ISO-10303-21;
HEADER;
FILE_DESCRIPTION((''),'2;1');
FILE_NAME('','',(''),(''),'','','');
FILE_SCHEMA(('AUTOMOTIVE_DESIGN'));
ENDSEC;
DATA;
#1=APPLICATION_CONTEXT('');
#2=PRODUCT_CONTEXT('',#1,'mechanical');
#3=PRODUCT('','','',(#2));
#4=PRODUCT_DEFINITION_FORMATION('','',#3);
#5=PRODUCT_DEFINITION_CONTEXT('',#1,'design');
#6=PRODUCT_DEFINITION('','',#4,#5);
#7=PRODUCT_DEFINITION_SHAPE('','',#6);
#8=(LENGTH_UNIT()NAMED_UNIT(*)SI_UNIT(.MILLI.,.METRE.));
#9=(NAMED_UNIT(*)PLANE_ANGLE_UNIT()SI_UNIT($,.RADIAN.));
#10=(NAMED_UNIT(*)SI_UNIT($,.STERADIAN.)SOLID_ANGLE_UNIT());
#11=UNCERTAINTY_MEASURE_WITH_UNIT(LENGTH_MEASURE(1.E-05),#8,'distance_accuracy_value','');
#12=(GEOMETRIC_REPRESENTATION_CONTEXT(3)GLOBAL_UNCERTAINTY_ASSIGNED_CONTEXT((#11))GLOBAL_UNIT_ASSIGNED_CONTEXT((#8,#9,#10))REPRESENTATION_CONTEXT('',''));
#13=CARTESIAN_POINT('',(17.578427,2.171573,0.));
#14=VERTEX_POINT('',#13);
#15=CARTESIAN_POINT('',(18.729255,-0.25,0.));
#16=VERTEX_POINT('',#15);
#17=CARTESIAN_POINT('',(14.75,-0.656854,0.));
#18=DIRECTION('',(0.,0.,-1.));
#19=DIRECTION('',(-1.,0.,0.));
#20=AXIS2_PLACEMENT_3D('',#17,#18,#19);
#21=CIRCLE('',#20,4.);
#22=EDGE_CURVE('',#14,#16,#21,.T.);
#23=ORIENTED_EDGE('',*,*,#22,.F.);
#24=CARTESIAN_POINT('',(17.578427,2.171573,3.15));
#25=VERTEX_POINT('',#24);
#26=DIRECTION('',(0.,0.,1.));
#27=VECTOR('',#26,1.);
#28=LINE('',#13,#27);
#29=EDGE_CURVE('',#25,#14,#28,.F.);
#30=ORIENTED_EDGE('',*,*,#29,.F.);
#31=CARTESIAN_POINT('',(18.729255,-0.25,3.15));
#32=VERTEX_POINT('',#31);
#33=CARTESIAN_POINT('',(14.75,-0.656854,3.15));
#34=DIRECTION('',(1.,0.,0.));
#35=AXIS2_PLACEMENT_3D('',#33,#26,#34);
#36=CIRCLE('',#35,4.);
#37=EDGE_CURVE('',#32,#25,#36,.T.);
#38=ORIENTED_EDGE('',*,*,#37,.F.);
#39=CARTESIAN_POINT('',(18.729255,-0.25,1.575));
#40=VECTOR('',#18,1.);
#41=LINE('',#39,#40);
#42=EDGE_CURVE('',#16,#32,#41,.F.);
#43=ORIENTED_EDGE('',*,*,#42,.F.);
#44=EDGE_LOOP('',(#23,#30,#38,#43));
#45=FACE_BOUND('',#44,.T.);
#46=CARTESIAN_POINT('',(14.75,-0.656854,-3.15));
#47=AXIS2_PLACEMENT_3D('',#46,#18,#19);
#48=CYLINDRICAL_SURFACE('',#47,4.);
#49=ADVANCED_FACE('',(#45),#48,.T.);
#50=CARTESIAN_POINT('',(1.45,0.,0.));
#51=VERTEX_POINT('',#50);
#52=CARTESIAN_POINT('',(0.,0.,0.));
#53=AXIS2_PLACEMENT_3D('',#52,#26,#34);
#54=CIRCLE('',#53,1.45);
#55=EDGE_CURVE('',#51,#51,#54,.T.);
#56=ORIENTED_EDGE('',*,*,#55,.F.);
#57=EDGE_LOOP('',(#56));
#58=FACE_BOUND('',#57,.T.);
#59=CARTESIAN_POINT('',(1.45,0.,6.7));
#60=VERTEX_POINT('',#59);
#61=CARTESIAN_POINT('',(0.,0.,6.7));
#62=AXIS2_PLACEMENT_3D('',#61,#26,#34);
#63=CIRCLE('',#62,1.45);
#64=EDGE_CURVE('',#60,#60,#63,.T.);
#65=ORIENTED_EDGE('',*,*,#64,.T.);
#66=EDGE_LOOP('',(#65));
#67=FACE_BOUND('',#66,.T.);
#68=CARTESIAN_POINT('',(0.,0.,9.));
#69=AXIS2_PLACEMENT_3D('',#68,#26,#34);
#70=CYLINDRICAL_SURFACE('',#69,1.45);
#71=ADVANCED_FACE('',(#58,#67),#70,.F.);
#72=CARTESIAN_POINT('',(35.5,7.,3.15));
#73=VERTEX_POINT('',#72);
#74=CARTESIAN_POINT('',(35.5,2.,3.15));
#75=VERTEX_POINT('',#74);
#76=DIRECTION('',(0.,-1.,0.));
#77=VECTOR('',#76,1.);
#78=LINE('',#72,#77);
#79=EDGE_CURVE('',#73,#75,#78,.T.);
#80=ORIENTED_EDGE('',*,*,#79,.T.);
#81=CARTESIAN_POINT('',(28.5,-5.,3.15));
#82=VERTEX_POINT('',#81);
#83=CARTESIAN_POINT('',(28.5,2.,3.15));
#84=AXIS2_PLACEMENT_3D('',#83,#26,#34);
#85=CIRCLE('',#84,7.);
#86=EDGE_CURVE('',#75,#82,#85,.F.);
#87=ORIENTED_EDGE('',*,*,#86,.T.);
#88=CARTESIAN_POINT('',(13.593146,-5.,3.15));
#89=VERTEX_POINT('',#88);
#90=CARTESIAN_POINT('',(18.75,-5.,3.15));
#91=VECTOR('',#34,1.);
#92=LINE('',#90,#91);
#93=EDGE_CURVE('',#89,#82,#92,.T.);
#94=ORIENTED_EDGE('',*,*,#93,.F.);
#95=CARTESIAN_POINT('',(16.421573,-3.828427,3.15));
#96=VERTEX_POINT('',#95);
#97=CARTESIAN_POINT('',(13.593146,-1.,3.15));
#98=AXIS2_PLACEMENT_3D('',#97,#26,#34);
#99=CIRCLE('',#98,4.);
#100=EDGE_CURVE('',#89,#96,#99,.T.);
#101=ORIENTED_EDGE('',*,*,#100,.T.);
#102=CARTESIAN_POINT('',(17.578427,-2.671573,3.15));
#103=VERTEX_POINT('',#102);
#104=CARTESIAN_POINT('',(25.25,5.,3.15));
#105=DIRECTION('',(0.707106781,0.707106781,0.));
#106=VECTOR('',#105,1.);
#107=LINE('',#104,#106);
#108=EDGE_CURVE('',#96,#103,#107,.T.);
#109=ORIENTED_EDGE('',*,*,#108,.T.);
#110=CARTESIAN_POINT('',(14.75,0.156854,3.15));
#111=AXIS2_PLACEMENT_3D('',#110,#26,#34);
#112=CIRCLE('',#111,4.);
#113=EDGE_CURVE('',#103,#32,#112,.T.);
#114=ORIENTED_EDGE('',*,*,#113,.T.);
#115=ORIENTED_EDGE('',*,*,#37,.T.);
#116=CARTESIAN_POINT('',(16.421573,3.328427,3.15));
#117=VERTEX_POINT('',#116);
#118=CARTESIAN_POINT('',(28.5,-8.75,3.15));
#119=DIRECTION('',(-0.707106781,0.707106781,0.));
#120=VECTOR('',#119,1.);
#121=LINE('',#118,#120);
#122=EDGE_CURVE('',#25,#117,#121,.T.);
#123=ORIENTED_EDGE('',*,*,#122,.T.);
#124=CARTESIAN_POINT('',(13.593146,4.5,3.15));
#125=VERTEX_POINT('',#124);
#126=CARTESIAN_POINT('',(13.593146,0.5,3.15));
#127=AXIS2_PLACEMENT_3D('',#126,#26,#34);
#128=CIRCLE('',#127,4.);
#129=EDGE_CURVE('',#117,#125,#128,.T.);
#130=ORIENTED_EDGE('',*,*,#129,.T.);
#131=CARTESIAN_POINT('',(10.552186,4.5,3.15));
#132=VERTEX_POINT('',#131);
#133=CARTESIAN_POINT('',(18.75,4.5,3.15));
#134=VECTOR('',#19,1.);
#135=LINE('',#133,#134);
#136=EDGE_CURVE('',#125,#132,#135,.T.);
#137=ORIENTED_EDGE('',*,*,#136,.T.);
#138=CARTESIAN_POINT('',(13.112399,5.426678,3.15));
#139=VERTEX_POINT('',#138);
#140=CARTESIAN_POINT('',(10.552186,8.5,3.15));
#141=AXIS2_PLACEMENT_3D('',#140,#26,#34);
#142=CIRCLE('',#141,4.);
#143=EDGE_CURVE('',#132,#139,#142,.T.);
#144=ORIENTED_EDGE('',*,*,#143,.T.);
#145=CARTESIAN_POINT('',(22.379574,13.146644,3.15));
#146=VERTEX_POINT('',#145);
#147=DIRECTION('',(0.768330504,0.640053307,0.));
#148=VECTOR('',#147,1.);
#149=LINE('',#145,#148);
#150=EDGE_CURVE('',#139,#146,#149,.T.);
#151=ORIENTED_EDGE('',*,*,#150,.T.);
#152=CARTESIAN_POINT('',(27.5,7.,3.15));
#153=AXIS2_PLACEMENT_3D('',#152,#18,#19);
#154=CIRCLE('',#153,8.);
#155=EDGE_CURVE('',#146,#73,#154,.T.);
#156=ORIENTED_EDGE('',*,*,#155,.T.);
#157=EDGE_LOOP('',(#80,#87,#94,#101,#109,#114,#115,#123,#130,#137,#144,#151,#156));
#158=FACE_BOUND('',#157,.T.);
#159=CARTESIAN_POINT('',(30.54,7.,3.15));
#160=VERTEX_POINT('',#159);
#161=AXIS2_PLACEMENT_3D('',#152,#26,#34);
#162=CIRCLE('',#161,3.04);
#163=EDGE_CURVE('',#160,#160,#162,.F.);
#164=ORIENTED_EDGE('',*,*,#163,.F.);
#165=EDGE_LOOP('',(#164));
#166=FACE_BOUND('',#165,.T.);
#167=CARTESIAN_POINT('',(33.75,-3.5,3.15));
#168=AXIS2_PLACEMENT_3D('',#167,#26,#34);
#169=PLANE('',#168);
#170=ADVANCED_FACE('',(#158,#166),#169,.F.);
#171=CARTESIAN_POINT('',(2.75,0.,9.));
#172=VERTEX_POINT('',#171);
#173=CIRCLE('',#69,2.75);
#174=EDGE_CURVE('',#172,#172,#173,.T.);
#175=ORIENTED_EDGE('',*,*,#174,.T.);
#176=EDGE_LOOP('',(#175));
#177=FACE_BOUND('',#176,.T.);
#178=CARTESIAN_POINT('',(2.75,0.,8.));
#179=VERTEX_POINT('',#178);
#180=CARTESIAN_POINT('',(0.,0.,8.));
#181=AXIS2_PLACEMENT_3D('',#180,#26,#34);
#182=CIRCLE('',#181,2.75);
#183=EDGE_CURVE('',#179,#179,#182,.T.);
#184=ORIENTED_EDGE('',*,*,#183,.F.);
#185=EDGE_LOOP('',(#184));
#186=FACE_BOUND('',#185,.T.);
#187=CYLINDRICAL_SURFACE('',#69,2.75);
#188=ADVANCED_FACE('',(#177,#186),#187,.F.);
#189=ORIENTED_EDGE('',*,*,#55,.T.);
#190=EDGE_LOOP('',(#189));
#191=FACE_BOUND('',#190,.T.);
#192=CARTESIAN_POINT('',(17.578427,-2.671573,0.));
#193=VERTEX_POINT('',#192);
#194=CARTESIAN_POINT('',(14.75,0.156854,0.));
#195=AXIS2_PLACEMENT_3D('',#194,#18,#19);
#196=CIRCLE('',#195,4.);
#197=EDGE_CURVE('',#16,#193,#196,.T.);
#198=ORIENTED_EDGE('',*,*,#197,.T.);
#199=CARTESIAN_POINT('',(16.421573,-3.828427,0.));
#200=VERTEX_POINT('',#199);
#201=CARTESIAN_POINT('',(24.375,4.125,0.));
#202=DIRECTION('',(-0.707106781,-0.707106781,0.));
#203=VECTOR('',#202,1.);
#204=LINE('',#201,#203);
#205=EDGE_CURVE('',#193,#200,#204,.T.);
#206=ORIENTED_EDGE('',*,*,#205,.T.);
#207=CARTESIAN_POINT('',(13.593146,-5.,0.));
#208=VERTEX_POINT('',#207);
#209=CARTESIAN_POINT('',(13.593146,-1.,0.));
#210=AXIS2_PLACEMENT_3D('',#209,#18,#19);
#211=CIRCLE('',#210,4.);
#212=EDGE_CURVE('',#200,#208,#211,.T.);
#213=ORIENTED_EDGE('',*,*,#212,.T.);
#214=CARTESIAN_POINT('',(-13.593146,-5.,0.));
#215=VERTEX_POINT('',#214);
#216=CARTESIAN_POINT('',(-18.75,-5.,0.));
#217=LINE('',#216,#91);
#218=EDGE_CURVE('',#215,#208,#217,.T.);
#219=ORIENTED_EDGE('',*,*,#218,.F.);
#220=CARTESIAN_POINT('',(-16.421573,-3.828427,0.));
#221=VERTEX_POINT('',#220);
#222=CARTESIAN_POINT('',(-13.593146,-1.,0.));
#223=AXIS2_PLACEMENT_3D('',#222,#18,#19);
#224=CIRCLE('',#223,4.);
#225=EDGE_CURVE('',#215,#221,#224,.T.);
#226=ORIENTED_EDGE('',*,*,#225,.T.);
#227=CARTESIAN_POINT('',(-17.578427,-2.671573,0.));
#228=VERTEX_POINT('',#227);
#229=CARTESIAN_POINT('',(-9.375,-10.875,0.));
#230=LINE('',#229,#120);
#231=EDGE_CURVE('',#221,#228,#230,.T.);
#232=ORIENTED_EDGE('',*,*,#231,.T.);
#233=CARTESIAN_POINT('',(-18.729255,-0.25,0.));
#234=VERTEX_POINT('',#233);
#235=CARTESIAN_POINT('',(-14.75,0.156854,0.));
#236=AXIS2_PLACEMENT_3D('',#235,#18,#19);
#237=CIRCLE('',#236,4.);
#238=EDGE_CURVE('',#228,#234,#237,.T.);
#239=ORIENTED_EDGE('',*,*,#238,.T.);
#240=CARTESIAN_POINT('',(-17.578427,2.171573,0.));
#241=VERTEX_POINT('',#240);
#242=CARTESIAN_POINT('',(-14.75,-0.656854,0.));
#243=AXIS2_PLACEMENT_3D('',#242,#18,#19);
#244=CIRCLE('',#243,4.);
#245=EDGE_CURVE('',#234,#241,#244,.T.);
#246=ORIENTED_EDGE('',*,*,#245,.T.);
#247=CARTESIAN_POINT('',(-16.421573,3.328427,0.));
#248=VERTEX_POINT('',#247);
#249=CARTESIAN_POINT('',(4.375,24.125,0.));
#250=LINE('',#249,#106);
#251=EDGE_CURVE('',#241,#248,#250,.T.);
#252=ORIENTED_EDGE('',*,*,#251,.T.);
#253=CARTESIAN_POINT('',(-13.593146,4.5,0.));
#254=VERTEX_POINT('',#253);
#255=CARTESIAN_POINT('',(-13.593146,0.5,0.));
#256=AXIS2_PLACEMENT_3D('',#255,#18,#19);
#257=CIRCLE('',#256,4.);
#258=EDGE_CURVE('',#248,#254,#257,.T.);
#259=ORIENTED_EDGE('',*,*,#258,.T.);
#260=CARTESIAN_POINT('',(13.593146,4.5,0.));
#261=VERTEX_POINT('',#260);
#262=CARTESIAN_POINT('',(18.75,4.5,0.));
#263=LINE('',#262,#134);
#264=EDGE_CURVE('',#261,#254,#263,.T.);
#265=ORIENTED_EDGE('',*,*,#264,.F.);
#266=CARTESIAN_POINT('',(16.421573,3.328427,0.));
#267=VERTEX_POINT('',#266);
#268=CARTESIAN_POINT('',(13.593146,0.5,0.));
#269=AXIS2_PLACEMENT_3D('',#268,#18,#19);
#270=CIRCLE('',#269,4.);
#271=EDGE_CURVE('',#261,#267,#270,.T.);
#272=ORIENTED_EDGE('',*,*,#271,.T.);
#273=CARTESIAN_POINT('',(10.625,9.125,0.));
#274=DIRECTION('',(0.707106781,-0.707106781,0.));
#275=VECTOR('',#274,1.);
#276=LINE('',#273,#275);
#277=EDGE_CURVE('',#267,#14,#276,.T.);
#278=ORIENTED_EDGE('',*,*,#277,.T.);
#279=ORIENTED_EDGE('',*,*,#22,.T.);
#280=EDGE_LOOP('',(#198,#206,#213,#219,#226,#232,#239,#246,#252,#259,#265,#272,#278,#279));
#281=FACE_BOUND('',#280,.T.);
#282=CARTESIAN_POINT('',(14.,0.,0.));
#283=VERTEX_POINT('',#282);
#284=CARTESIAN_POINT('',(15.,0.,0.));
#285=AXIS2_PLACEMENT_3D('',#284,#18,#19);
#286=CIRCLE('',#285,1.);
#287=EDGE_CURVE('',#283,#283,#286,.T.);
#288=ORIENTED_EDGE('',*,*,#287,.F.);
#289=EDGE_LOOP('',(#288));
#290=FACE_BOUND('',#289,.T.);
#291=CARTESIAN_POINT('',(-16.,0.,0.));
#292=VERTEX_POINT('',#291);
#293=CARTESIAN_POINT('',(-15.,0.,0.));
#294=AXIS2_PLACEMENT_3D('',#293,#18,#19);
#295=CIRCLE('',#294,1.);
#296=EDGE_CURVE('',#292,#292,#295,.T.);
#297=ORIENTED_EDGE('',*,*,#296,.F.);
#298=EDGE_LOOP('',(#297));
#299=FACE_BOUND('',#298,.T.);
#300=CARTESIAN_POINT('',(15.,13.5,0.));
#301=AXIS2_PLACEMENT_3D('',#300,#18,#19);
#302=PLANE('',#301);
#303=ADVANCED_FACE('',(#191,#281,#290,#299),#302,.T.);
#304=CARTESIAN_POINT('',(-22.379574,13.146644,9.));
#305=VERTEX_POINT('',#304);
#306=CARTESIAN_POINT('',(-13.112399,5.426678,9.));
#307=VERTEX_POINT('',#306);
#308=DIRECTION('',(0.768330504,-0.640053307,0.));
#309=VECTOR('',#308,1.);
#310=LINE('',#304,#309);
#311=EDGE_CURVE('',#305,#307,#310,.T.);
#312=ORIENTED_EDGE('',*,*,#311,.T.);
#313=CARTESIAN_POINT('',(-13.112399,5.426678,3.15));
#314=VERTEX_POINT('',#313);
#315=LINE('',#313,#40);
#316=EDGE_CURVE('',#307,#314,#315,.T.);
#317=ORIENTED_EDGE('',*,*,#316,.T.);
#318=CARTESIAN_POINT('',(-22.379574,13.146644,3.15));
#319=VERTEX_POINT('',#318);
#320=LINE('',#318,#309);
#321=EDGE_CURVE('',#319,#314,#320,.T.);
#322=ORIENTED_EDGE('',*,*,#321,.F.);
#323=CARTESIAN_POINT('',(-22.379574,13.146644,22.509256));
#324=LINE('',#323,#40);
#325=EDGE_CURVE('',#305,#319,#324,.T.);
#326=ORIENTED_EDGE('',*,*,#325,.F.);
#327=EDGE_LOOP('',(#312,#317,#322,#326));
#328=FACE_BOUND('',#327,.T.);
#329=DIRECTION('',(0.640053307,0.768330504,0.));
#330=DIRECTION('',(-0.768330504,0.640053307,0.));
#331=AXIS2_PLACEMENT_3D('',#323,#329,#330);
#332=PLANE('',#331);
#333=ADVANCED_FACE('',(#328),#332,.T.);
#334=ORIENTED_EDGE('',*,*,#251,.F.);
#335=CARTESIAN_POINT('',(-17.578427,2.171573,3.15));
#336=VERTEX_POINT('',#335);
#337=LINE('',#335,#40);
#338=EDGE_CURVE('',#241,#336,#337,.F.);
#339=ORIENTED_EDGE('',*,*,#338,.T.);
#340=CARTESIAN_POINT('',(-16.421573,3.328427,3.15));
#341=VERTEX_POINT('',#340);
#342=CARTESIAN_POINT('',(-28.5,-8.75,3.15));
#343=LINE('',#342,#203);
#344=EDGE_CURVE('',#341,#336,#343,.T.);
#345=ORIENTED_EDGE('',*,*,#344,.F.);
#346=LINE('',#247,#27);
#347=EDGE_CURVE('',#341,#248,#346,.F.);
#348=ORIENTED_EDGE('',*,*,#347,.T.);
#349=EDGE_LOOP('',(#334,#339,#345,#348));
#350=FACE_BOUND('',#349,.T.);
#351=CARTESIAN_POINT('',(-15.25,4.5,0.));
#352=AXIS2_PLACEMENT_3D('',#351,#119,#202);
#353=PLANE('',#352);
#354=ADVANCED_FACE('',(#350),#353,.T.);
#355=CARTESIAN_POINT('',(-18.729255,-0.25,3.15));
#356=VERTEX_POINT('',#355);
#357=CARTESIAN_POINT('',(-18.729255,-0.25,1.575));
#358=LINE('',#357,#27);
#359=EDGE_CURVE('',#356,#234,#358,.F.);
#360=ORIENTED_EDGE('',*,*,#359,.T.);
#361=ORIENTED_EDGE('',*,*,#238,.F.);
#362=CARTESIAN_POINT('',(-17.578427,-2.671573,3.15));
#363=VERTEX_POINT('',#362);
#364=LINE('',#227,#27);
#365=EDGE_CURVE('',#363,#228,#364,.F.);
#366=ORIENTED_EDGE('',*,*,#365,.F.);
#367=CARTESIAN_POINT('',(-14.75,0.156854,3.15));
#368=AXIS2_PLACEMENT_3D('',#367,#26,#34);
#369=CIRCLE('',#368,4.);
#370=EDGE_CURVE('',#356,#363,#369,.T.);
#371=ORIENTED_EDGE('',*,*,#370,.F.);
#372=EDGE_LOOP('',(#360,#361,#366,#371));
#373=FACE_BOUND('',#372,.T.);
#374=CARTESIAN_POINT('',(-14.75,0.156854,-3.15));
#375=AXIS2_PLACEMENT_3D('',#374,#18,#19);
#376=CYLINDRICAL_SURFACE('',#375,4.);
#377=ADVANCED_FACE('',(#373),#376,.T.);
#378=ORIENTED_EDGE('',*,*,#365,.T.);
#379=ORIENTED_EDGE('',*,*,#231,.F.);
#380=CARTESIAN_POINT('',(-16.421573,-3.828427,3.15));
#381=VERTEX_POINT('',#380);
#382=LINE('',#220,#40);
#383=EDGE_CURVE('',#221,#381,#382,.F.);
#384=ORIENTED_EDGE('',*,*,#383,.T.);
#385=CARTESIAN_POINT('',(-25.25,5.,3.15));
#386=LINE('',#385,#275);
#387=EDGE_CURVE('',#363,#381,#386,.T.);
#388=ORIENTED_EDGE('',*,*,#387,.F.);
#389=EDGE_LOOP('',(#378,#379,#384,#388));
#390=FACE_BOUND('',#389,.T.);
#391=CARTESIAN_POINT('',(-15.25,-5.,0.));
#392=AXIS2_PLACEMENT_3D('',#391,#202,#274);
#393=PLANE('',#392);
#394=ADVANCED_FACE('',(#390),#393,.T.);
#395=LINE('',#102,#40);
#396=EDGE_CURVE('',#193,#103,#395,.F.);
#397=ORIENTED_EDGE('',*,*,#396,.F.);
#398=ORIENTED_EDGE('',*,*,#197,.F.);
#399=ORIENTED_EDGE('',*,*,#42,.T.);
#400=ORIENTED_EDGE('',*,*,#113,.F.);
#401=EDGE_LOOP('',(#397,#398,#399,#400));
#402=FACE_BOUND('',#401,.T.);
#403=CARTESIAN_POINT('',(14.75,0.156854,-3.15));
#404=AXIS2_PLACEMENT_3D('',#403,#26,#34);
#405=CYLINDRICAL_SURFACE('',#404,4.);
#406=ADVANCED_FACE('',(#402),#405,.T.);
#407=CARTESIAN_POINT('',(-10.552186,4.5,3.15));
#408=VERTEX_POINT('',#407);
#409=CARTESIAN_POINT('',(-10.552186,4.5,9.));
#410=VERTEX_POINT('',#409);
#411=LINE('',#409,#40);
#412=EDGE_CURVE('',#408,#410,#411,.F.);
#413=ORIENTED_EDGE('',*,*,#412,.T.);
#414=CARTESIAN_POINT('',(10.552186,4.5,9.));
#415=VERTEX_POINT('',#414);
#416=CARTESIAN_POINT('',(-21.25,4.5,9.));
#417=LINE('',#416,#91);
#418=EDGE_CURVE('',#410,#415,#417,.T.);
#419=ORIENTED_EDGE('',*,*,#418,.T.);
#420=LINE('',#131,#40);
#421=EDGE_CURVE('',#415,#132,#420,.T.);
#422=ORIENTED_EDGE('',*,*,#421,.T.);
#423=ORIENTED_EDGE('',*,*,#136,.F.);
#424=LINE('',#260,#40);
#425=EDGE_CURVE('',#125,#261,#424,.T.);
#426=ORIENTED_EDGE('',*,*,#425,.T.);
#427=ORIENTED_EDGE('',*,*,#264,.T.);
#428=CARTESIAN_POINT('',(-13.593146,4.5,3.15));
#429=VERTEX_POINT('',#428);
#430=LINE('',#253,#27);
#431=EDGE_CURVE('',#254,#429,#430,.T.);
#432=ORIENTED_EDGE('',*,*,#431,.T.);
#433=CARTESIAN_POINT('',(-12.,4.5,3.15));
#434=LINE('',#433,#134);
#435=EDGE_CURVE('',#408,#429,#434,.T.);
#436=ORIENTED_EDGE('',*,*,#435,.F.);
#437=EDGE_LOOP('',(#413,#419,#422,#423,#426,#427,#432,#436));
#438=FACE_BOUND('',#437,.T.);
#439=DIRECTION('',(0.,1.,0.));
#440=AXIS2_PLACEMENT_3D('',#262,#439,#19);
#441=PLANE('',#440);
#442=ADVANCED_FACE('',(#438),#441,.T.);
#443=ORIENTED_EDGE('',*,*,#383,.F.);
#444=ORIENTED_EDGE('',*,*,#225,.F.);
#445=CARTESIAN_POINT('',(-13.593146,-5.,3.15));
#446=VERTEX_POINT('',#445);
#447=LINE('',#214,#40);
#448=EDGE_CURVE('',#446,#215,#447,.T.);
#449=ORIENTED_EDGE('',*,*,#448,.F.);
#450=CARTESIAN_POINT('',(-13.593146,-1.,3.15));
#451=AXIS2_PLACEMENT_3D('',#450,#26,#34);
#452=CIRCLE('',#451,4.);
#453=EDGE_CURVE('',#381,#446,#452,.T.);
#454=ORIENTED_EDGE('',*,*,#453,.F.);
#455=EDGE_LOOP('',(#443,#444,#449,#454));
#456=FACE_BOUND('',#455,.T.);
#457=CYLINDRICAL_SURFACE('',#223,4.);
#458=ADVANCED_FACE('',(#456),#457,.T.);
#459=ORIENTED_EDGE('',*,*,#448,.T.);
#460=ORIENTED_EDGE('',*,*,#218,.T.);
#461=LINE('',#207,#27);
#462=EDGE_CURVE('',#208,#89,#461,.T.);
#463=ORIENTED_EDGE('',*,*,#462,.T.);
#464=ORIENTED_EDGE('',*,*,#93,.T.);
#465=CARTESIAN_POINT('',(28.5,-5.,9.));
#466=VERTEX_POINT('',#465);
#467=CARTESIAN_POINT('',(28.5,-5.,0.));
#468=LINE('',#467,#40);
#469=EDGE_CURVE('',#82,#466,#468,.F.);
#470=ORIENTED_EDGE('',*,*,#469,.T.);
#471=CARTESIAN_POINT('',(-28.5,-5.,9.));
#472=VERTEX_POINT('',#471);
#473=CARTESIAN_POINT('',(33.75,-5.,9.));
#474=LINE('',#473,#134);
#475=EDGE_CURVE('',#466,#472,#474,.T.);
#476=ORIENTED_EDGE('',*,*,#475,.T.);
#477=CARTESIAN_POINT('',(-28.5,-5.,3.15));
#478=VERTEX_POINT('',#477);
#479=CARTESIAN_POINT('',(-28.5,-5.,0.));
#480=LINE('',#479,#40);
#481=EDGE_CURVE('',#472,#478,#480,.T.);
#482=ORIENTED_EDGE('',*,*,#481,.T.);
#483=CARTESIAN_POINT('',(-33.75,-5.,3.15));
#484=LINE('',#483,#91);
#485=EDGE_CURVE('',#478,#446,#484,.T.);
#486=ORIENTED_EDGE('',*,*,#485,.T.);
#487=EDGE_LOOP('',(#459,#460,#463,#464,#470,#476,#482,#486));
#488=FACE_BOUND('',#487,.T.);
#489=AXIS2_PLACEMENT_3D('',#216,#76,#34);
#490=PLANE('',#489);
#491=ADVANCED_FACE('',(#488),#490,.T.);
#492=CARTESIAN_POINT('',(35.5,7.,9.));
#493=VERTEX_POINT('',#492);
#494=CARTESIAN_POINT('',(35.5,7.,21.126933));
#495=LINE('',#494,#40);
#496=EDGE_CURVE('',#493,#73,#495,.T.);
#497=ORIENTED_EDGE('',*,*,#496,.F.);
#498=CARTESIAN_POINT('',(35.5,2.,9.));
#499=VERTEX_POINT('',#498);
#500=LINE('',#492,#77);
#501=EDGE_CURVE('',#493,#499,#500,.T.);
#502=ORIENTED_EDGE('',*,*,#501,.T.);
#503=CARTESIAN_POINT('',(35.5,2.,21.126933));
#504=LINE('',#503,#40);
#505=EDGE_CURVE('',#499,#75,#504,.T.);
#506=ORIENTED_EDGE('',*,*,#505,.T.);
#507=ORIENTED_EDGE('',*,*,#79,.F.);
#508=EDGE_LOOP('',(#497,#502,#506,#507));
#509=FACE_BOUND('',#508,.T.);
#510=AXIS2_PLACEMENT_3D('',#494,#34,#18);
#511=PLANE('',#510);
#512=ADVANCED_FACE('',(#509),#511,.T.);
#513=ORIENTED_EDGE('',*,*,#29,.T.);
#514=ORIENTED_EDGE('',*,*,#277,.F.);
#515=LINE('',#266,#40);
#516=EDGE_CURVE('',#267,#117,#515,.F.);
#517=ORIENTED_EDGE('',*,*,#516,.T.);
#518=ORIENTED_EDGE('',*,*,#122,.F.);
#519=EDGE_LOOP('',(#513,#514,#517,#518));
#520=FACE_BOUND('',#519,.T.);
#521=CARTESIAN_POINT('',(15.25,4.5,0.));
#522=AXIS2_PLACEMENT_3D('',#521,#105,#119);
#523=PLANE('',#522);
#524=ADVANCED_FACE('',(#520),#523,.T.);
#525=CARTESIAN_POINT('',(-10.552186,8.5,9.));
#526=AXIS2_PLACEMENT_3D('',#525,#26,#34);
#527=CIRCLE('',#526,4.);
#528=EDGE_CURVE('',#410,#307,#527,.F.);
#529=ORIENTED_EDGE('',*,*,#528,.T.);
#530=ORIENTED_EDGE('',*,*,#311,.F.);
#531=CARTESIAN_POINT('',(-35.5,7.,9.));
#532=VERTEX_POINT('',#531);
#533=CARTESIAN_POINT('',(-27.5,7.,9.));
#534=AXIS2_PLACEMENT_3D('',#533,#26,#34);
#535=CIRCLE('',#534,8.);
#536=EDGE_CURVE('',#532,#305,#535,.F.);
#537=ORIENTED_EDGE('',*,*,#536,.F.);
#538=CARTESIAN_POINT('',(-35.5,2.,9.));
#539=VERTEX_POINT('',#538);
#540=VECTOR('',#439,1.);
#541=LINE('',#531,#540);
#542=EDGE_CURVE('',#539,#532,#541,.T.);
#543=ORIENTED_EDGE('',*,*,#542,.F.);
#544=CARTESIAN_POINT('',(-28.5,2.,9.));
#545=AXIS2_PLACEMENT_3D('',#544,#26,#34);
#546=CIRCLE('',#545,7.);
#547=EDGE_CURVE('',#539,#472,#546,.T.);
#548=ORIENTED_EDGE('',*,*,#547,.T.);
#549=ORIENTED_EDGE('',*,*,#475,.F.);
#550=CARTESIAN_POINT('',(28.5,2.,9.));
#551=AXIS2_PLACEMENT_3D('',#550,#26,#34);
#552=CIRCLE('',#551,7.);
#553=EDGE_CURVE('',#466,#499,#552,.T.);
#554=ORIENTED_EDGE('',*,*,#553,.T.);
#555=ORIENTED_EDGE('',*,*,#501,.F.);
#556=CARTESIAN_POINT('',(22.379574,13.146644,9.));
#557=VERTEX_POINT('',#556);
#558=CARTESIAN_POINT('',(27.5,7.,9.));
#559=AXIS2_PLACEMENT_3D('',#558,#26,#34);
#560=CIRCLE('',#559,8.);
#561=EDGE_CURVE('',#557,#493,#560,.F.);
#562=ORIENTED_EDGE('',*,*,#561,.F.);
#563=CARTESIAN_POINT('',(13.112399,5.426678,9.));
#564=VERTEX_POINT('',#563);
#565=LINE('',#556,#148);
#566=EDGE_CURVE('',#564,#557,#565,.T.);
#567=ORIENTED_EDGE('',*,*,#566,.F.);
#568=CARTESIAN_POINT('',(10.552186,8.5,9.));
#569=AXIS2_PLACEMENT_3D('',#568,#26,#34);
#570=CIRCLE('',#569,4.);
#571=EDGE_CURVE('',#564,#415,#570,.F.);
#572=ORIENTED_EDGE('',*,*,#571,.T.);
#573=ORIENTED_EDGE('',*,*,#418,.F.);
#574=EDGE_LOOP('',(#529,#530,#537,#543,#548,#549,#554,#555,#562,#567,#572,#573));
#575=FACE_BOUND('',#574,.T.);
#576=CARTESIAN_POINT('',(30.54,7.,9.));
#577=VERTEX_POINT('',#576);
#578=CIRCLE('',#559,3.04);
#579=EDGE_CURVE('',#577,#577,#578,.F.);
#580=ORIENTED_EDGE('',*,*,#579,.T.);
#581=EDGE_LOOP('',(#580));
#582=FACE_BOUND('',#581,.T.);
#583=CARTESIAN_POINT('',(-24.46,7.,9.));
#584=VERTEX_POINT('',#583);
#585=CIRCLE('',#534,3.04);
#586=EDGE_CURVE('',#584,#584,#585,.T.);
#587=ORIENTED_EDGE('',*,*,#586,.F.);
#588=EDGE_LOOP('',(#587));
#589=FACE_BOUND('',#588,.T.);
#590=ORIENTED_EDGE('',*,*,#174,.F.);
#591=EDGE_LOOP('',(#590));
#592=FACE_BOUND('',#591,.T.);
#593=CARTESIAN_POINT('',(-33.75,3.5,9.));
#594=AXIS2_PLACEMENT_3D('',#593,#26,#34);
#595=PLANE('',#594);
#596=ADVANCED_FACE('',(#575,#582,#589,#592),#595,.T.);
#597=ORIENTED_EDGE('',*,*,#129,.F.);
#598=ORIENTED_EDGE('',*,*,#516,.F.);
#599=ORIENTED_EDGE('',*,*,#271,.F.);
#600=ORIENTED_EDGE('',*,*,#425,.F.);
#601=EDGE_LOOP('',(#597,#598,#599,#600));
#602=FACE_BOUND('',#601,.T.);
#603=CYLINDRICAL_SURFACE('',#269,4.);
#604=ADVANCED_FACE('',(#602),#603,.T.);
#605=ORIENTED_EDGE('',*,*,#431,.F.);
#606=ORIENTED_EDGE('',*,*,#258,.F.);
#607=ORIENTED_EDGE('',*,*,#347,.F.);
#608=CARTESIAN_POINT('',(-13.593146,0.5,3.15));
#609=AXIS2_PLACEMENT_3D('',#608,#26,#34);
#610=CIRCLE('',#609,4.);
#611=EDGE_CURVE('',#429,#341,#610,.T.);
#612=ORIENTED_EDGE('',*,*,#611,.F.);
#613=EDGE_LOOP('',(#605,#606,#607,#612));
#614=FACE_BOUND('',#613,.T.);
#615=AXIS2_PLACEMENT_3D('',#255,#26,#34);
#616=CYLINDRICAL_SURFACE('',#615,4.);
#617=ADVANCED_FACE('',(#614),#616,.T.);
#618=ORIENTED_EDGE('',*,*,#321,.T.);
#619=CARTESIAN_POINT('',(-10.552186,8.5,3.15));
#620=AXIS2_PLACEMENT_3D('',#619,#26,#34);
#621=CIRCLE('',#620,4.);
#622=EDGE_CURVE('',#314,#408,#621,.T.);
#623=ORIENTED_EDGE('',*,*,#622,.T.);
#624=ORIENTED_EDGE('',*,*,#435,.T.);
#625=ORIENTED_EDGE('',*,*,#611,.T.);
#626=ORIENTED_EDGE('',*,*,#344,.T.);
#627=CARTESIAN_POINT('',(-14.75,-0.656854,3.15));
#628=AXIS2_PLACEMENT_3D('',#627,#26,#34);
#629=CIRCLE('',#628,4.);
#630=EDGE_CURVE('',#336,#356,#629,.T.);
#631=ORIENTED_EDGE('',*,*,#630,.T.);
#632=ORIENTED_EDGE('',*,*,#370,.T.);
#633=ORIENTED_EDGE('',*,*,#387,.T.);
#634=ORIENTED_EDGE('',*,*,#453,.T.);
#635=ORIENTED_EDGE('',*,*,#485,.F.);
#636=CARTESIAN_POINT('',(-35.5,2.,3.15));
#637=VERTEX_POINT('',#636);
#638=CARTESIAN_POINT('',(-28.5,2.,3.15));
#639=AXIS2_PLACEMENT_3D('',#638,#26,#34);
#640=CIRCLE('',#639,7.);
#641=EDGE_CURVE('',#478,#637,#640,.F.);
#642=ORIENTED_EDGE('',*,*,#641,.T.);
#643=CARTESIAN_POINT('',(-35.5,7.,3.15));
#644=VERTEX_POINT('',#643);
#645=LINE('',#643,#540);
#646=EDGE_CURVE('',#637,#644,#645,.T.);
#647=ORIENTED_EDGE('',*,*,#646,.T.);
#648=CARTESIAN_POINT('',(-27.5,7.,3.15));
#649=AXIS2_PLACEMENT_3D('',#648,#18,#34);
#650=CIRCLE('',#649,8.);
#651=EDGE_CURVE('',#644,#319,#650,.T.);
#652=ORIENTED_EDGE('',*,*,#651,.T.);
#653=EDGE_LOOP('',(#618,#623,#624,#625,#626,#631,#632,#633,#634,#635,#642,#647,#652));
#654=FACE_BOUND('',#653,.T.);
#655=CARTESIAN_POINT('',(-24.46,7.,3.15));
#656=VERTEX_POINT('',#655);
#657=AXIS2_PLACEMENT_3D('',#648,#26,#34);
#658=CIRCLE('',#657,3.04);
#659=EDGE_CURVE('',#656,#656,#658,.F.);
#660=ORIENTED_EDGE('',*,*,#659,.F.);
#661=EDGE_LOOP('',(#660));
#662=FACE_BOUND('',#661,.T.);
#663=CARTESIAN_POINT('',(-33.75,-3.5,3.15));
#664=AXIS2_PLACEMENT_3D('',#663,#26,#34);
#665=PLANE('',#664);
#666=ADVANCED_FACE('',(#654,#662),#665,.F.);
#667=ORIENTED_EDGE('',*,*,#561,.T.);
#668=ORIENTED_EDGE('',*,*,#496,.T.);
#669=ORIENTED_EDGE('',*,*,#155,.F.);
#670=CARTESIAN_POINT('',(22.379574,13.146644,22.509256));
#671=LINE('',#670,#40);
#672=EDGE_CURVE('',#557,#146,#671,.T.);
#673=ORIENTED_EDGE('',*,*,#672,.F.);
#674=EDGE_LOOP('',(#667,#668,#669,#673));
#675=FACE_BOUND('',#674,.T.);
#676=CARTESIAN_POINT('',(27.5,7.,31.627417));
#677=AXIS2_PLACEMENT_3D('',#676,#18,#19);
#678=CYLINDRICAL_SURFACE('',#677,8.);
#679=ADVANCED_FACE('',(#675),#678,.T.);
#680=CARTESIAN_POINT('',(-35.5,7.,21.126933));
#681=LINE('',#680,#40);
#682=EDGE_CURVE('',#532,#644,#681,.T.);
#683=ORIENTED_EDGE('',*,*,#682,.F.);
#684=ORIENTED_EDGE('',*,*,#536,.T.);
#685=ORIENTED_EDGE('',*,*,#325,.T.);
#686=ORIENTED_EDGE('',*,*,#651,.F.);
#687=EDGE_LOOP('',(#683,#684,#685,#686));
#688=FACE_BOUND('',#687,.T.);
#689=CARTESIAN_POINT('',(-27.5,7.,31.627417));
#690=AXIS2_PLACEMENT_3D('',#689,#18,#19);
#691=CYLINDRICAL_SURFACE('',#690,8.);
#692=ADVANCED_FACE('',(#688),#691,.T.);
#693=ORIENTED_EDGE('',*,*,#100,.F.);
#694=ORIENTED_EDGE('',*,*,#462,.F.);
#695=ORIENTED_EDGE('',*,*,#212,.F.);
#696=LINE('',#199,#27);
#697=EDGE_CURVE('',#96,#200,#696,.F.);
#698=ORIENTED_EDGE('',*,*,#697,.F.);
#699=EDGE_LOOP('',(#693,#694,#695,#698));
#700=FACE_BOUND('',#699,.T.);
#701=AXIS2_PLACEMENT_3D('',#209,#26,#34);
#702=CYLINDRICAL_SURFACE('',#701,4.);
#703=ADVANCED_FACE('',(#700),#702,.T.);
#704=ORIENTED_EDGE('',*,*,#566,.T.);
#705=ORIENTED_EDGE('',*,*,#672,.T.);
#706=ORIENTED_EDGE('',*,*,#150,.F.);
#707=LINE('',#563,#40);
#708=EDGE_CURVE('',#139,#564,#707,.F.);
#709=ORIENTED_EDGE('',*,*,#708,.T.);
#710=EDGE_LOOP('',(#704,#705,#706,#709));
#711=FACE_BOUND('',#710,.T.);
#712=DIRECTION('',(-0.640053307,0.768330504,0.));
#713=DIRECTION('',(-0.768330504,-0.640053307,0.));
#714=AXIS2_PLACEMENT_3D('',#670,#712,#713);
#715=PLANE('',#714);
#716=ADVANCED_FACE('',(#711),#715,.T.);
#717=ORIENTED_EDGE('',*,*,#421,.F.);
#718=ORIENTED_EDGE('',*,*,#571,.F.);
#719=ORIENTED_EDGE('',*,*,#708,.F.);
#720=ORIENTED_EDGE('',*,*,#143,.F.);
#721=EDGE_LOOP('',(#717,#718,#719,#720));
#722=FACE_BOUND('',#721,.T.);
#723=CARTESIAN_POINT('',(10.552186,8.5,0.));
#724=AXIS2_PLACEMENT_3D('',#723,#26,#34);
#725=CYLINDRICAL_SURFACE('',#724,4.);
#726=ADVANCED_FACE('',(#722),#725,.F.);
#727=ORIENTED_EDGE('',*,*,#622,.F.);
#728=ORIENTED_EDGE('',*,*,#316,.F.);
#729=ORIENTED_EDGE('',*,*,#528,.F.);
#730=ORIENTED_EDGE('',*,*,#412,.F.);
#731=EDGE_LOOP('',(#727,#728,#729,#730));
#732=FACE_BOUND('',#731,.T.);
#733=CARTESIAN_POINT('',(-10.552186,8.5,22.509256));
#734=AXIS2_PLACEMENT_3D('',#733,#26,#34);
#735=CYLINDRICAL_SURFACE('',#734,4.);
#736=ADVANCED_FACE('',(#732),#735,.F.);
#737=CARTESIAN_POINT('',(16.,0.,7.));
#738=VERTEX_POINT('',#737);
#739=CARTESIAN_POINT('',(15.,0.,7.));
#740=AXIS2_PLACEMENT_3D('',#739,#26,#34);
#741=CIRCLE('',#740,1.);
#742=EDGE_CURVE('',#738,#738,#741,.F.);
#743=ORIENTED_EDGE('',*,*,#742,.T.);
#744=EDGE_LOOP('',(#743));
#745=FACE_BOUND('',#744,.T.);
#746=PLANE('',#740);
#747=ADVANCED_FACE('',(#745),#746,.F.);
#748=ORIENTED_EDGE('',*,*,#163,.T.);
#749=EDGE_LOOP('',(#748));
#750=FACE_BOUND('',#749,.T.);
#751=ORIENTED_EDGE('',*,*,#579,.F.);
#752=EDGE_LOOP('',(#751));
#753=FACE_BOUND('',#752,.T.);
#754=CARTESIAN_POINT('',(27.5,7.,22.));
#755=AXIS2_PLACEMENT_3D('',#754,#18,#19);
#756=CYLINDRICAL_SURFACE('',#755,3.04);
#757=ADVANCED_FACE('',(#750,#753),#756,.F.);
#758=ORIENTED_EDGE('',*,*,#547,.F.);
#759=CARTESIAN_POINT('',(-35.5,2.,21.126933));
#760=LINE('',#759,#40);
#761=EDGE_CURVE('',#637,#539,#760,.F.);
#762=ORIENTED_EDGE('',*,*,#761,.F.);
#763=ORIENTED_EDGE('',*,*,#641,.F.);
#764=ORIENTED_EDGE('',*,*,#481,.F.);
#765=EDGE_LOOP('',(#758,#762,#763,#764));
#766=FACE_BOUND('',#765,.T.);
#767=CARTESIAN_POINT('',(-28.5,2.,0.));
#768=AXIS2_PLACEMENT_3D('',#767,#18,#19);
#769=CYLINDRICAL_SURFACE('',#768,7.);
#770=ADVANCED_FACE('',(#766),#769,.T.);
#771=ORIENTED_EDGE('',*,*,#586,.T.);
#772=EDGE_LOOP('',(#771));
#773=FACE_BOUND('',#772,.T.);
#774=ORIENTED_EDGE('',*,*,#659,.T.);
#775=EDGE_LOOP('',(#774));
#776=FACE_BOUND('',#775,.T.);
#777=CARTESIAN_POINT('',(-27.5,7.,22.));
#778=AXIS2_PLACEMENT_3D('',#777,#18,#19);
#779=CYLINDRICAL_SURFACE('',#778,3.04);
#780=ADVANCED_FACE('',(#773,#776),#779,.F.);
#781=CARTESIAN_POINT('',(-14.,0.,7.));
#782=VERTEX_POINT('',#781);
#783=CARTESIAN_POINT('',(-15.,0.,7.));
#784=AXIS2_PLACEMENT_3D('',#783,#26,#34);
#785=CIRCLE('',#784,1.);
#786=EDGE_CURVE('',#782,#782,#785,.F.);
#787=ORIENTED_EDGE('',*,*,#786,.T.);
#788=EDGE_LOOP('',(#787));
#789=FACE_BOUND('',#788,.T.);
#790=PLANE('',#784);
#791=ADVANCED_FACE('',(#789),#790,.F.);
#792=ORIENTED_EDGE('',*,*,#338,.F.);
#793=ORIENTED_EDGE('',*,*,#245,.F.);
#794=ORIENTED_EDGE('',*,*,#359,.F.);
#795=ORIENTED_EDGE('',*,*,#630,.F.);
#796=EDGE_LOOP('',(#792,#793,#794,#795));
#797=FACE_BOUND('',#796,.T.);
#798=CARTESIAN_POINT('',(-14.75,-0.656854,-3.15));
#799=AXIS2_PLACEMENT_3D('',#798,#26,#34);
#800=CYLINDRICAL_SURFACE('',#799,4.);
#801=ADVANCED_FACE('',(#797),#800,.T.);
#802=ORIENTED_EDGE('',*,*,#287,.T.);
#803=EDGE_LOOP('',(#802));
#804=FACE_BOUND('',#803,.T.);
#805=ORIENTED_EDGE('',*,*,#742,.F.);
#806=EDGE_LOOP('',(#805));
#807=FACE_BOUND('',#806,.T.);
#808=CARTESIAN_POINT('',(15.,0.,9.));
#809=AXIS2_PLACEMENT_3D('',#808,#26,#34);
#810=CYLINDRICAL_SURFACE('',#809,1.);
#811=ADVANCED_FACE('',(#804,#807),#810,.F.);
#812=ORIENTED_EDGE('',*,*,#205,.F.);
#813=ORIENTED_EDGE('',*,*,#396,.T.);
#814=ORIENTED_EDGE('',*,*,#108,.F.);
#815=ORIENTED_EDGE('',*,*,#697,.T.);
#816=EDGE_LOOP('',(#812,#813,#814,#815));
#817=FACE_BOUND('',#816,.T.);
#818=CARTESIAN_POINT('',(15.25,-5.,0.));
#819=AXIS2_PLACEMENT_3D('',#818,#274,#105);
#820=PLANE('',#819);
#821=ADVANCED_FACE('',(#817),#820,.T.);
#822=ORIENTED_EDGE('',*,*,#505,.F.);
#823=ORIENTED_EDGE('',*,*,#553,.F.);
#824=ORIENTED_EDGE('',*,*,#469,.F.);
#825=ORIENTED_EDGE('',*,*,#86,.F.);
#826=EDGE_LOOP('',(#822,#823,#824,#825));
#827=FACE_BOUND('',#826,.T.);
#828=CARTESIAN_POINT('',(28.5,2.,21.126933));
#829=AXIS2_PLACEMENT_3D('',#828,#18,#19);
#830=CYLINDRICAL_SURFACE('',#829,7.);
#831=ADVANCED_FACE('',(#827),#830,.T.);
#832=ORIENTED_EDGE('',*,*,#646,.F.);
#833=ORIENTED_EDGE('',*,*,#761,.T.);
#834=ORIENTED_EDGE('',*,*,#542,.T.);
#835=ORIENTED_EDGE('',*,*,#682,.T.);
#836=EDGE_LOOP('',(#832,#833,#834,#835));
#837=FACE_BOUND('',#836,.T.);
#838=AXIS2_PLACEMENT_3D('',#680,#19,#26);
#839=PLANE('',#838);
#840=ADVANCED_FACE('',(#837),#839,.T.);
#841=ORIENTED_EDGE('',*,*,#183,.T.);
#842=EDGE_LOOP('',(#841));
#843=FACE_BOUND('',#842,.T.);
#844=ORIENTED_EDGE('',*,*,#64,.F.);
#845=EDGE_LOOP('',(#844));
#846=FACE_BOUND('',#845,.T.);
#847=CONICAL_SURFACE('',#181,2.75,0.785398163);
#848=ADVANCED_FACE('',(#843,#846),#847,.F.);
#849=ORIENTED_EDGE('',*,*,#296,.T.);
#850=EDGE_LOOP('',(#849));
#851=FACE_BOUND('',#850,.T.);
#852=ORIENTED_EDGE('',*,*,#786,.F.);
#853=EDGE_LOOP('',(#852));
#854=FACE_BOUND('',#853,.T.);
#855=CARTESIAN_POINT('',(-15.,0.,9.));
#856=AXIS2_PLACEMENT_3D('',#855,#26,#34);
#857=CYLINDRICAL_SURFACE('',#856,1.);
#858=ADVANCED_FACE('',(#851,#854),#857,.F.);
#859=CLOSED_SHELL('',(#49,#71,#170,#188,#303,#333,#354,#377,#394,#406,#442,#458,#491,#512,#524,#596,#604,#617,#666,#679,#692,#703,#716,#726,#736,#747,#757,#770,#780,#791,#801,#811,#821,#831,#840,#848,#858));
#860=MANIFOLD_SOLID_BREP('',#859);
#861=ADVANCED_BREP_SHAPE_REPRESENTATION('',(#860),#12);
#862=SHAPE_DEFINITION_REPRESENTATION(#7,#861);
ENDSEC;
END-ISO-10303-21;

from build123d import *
from build123d.topology import SkipClean

# Parameters (mm, degrees)
BOSS_EXTRUDE1_DEPTH          = 9
BOSS_EXTRUDE1_DEPTH_BACK     = 9
SKETCH1_W                    = 67.5
SKETCH1_H                    = 7
SKETCH2_W                    = 15
SKETCH2_H                    = 6.3
CUT_EXTRUDE1_DEPTH           = 36.623903492
SKETCH3_W                    = 12.5
SKETCH3_H                    = 5.85
BOSS_EXTRUDE2_DEPTH          = 10
CUT_EXTRUDE2_DEPTH           = 22
CUT_EXTRUDE2_DEPTH_BACK      = 24.5
SKETCH4_R                    = 3.04
CUT_EXTRUDE3_DEPTH           = 5
SKETCH6_R                    = 6.2
CUT_EXTRUDE4_DEPTH           = 1
MIRROR2_COPY_1_SKETCH_R      = 6.2
MIRROR2_COPY_1_DEPTH         = 1
SKETCH7_W                    = 12.5
SKETCH7_H                    = 8.5
CUT_EXTRUDE5_DEPTH           = 1
MIRROR5_COPY_1_SKETCH_W      = 12.5
MIRROR5_COPY_1_SKETCH_H      = 8.5
MIRROR5_COPY_1_DEPTH         = 1
TAP_DRILL_FOR_M2_TAP1_D      = 1.6
CUT_EXTRUDE6_DEPTH           = 27
SKETCH12_W                   = 73.606041854
SKETCH12_H                   = 30.436261762
CUT_EXTRUDE7_DEPTH           = 22
F_2_0_2_DIAMETER_HOLE1_D     = 2
F_2_0_2_DIAMETER_HOLE1_DEPTH = 30.5
F_2_0_2_DIAMETER_HOLE2_D     = 2
F_2_0_2_DIAMETER_HOLE2_DEPTH = 16
F_2_0_2_DIAMETER_HOLE2_TIP   = 0.600860619
BOSS_EXTRU_1_START           = 1
ESQUISSE2_R                  = 3.04
BOSS_EXTRU_1_DEPTH           = 1
BOSS_EXTRU_3_START           = -5.85
ESQUISSE5_R                  = 0.8
BOSS_EXTRU_3_DEPTH           = 5.85
BOSS_EXTRU_4_START           = -9
ESQUISSE6_R                  = 0.8
BOSS_EXTRU_4_DEPTH           = 9
BOSS_EXTRUDE3_DEPTH          = 1.5
BOSS_EXTRUDE4_DEPTH          = 1
BOSS_EXTRUDE5_DEPTH          = 5.85
CHAMFER1_SIZE                = 3.5
BOSS_EXTRUDE6_START          = -2
SKETCH27_R                   = 1
BOSS_EXTRUDE6_DEPTH          = 2
SKETCH28_R                   = 8
SKETCH28_R_2                 = 3.04
BOSS_EXTRUDE7_DEPTH          = 5.85
SKETCH29_W                   = 1.75
SKETCH29_H                   = 12
BOSS_EXTRUDE8_DEPTH          = 5.85
BOSS_EXTRUDE9_DEPTH          = 5.85
FILLET1_R                    = 4
FILLET2_R                    = 7
FILLET4_R                    = 4


with BuildPart() as part:
    # Sketch1 → Boss-Extrude1 (new, two sides: drawn at the far end of the back side and taken through both)
    with BuildSketch(Plane.XY.offset(-BOSS_EXTRUDE1_DEPTH_BACK)):
        Rectangle(SKETCH1_W, SKETCH1_H)
    extrude(amount=BOSS_EXTRUDE1_DEPTH + BOSS_EXTRUDE1_DEPTH_BACK)

    # Sketch2 → Cut-Extrude1 (cut, through all)
    with BuildSketch(Plane(origin=(0, 3.5, 0), x_dir=(1, 0, 0), z_dir=(0, 1, 0))):
        with Locations((-26.25, 0)):
            Rectangle(SKETCH2_W, SKETCH2_H)
        with Locations((26.25, 0)):
            Rectangle(SKETCH2_W, SKETCH2_H)
    extrude(amount=-CUT_EXTRUDE1_DEPTH, mode=Mode.SUBTRACT)

    # Sketch3 → Boss-Extrude2 (add)
    with BuildSketch(Plane(origin=(0, 3.5, 0), x_dir=(1, 0, 0), z_dir=(0, 1, 0))):
        with Locations((-27.5, 6.075)):
            Rectangle(SKETCH3_W, SKETCH3_H)
        with Locations((-27.5, -6.075)):
            Rectangle(SKETCH3_W, SKETCH3_H)
        with Locations((27.5, -6.075)):
            Rectangle(SKETCH3_W, SKETCH3_H)
        with Locations((27.5, 6.075)):
            Rectangle(SKETCH3_W, SKETCH3_H)
    extrude(amount=BOSS_EXTRUDE2_DEPTH)

    # Sketch4 → Cut-Extrude2 (cut, two sides: drawn at the far end of the back side and taken through both)
    with BuildSketch(Plane.XY.offset(-CUT_EXTRUDE2_DEPTH_BACK)):
        with Locations((-27.5, 7)):
            Circle(SKETCH4_R)
        with Locations((27.5, 7)):
            Circle(SKETCH4_R)
    extrude(amount=CUT_EXTRUDE2_DEPTH + CUT_EXTRUDE2_DEPTH_BACK, mode=Mode.SUBTRACT)

    # Sketch5 → Cut-Extrude3 (cut)
    with BuildSketch(Plane.XY):
        Polygon((15, 3.5), (36.256888292, -2.195766051), (36.256888292, 13.5), (15, 13.5), align=None)
    extrude(amount=-CUT_EXTRUDE3_DEPTH, mode=Mode.SUBTRACT)

    # Sketch6 → Cut-Extrude4 (cut)
    with BuildSketch(Plane.XY.offset(9)):
        with Locations((27.5, 7)):
            Circle(SKETCH6_R)
    cut_extrude4 = extrude(amount=-CUT_EXTRUDE4_DEPTH, mode=Mode.SUBTRACT)

    # Mirror1: Cut-Extrude4 across plane
    add(cut_extrude4.mirror(Plane.XY), mode=Mode.SUBTRACT)

    # Mirror2: Cut-Extrude4 across plane
    add(cut_extrude4.mirror(Plane(origin=(0, 0, 0), x_dir=(0, 0, 1), z_dir=(1, 0, 0))), mode=Mode.SUBTRACT)

    # Mirror2 copy 1 sketch → Mirror2 copy 1 (cut)
    with BuildSketch(Plane(origin=(0, 0, -9), x_dir=(-1, 0, 0), z_dir=(0, 0, -1))):
        with Locations((27.5, 7)):
            Circle(MIRROR2_COPY_1_SKETCH_R)
    extrude(amount=-MIRROR2_COPY_1_DEPTH, mode=Mode.SUBTRACT)

    # Sketch7 → Cut-Extrude5 (cut)
    with BuildSketch(Plane.XY.offset(9)):
        with Locations((-27.5, 9.25)):
            Rectangle(SKETCH7_W, SKETCH7_H)
    cut_extrude5 = extrude(amount=-CUT_EXTRUDE5_DEPTH, mode=Mode.SUBTRACT)

    # Mirror3: Cut-Extrude5 across plane
    add(cut_extrude5.mirror(Plane(origin=(0, 0, 0), x_dir=(0, 0, 1), z_dir=(1, 0, 0))), mode=Mode.SUBTRACT)

    # Mirror5: Cut-Extrude5 across plane
    add(cut_extrude5.mirror(Plane.XY), mode=Mode.SUBTRACT)

    # Mirror5 copy 1 sketch → Mirror5 copy 1 (cut)
    with BuildSketch(Plane(origin=(0, 0, -9), x_dir=(-1, 0, 0), z_dir=(0, 0, -1))):
        with Locations((-27.5, 9.25)):
            Rectangle(MIRROR5_COPY_1_SKETCH_W, MIRROR5_COPY_1_SKETCH_H)
    extrude(amount=-MIRROR5_COPY_1_DEPTH, mode=Mode.SUBTRACT)

    # Tap Drill for M2 Tap1 (through all)
    with Locations(Plane.XY.offset(9)):
        with Locations((-25, 0), (0, 0), (25, 0)):
            Hole(TAP_DRILL_FOR_M2_TAP1_D / 2)

    # Sketch11 → Cut-Extrude6 (cut)
    with BuildSketch(Plane.XY.offset(9)):
        with BuildLine():
            Line((-33.75, 6.999999588), (-33.75, 21.221242017))
            Line((-33.75, 21.221242017), (-21.25, 21.221242017))
            Line((-21.25, 21.221242017), (-21.25, 6.999999588))
            ThreePointArc((-21.25, 6.999999588), (-27.5, 13.25), (-33.75, 6.999999588))
        make_face()
    cut_extrude6 = extrude(amount=-CUT_EXTRUDE6_DEPTH, mode=Mode.SUBTRACT)

    # Mirror6: Cut-Extrude6 across plane
    add(cut_extrude6.mirror(Plane(origin=(0, 0, 0), x_dir=(0, 0, 1), z_dir=(1, 0, 0))), mode=Mode.SUBTRACT)

    # Sketch12 → Cut-Extrude7 (cut)
    with BuildSketch(Plane.XY):
        Rectangle(SKETCH12_W, SKETCH12_H)
    extrude(amount=-CUT_EXTRUDE7_DEPTH, mode=Mode.SUBTRACT)

    # Ø2.0 (2) Diameter Hole1
    with Locations(Plane.XY.offset(9)):
        with Locations((-15, 0)):
            Hole(F_2_0_2_DIAMETER_HOLE1_D / 2, depth=F_2_0_2_DIAMETER_HOLE1_DEPTH)

    # Ø2.0 (2) Diameter Hole2
    with Locations(Plane.XY.offset(9)):
        with Locations((15, 0)):
            Hole(F_2_0_2_DIAMETER_HOLE2_D / 2, depth=F_2_0_2_DIAMETER_HOLE2_DEPTH)
            with Locations((0, 0, -(F_2_0_2_DIAMETER_HOLE2_DEPTH + F_2_0_2_DIAMETER_HOLE2_TIP / 2))):  # 118° drill point
                Cone(0, F_2_0_2_DIAMETER_HOLE2_D / 2, F_2_0_2_DIAMETER_HOLE2_TIP, mode=Mode.SUBTRACT)

    # Esquisse2 → Boss.-Extru.1 (add)
    # profile 1 of 2: a face of its own
    with SkipClean():  # the faces are left unmerged after this step: merging them gives an invalid solid
        with BuildSketch(Plane.XY.offset(8).offset(BOSS_EXTRU_1_START)):
            with BuildLine():
                ThreePointArc((21.6314397, 5), (26.48636147, 13.116578858), (33.7, 7))
                ThreePointArc((33.7, 7), (33.616578858, 5.98636147), (33.3685603, 5))
                Line((33.3685603, 5), (33.75, 5))
                Line((33.75, 5), (33.75, 6.999999588))
                ThreePointArc((33.75, 6.999999588), (27.5, 13.25), (21.25, 6.999999588))
                Line((21.25, 6.999999588), (21.25, 5))
                Line((21.25, 5), (21.6314397, 5))
            make_face()
        # profile 2 of 2: a face of its own
        with BuildSketch(Plane.XY.offset(8).offset(BOSS_EXTRU_1_START)):
            with BuildLine():
                ThreePointArc((33.3685603, 5), (33.616578858, 5.98636147), (33.7, 7))
                ThreePointArc((33.7, 7), (26.48636147, 13.116578858), (21.6314397, 5))
                ThreePointArc((21.6314397, 5), (27.5, 0.8), (33.3685603, 5))
            make_face()
            with Locations((27.5, 7)):
                Circle(ESQUISSE2_R, mode=Mode.SUBTRACT)
        boss_extru_1 = extrude(amount=-BOSS_EXTRU_1_DEPTH)

    # Symétrie1: Boss.-Extru.1 across plane
    with SkipClean():  # the faces are left unmerged after this step: merging them gives an invalid solid
        add(boss_extru_1.mirror(Plane(origin=(0, 0, 0), x_dir=(0, 0, 1), z_dir=(1, 0, 0))))

    # Esquisse5 → Boss.-Extru.3 (add)
    with SkipClean():  # the faces are left unmerged after this step: merging them gives an invalid solid
        with BuildSketch(Plane.XY.offset(9).offset(BOSS_EXTRU_3_START)):
            with Locations((-25, 0)):
                Circle(ESQUISSE5_R)
            with Locations((25, 0)):
                Circle(ESQUISSE5_R)
        extrude(amount=BOSS_EXTRU_3_DEPTH)

    # Esquisse6 → Boss.-Extru.4 (add)
    with SkipClean():  # the faces are left unmerged after this step: merging them gives an invalid solid
        with BuildSketch(Plane.XY.offset(9).offset(BOSS_EXTRU_4_START)):
            Circle(ESQUISSE6_R)
        extrude(amount=BOSS_EXTRU_4_DEPTH)

    # Sketch22 → Boss-Extrude3 (add)
    with SkipClean():  # the faces are left unmerged after this step: merging them gives an invalid solid
        with BuildSketch(Plane.XZ.offset(3.5)):
            Polygon((-18.75, 0), (18.75, 0), (18.75, 3.15), (33.75, 3.15), (33.75, 9), (-33.75, 9), (-33.75, 3.15), (-18.75, 3.15), align=None)
        extrude(amount=BOSS_EXTRUDE3_DEPTH)

    # Sketch23 → CSK for M2.5 Countersunk Flat Head Screw1 (revolve, cut)
    with SkipClean():  # the faces are left unmerged after this step: merging them gives an invalid solid
        with BuildSketch(Plane(origin=(0, 0, 9), x_dir=(0, -1, 0), z_dir=(1, 0, 0))):
            Polygon((0, 0), (0, 9), (1.45, 9), (1.45, 2.3), (2.75, 1), (2.75, 0), align=None)
        revolve(axis=Axis((0, 0, 15.35), (0, 0, -1)), mode=Mode.SUBTRACT)

    # Sketch25 → Boss-Extrude4 (add)
    with SkipClean():  # the faces are left unmerged after this step: merging them gives an invalid solid
        with BuildSketch(Plane(origin=(0, 3.5, 0), x_dir=(1, 0, 0), z_dir=(0, 1, 0))):
            Polygon((18.75, 0), (-18.75, 0), (-18.75, -3.15), (-21.25, -3.15), (-21.25, -9), (21.25, -9), (21.25, -3.15), (18.75, -3.15), align=None)
        extrude(amount=BOSS_EXTRUDE4_DEPTH)

    # Sketch26 → Boss-Extrude5 (add)
    with SkipClean():  # the faces are left unmerged after this step: merging them gives an invalid solid
        with BuildSketch(Plane(origin=(0, 0, 3.15), x_dir=(-1, 0, 0), z_dir=(0, 0, -1))):
            Polygon((-24.13078786, 12.264115268), (-12, 4.5), (-21.25, 4.5), align=None)
            Polygon((21.25, 4.5), (24.13078786, 12.264115268), (12, 4.5), align=None)
        extrude(amount=-BOSS_EXTRUDE5_DEPTH)

    # Chamfer1
    # the kernel refuses this chamfer: 3.5 mm, written as the material it takes off along each edge
    with BuildSketch(Plane(origin=(-18.75, -5, 3.15), x_dir=(0.9996219169112968, -0.027495876610586112, 0), z_dir=(0, 0, -1)), Plane(origin=(-18.75, 4.5, -9.000890458), x_dir=(0.9996219169112968, 0.027495876610586372, 0), z_dir=(0, 0, 1))) as chamfer1_piece_1:
        Polygon((CHAMFER1_SIZE * 0.999621916911, -CHAMFER1_SIZE * 0.0274958766106), (-CHAMFER1_SIZE * 0.0274958766106, -CHAMFER1_SIZE * 0.999621916911), (0, 0), align=None)
    extrude(amount=12.150890458, mode=Mode.SUBTRACT)
    with BuildSketch(Plane(origin=(18.75, -5, -9.000890458), x_dir=(0.02749587661058612, 0.9996219169112968, 0), z_dir=(0, 0, 1)), Plane(origin=(18.75, 4.5, 3.15), x_dir=(0.02749587661058612, -0.9996219169112968, 0), z_dir=(0, 0, -1))) as chamfer1_piece_2:
        Polygon((CHAMFER1_SIZE * 0.999621916911, CHAMFER1_SIZE * 0.0274958766106), (-CHAMFER1_SIZE * 0.0274958766106, CHAMFER1_SIZE * 0.999621916911), (0, 0), align=None)
    extrude(amount=12.150890458, mode=Mode.SUBTRACT)

    # Sketch27 → Boss-Extrude6 (add)
    with BuildSketch(Plane.XY.offset(9).offset(BOSS_EXTRUDE6_START)):
        with Locations((-15, 0)):
            Circle(SKETCH27_R)
        with Locations((15, 0)):
            Circle(SKETCH27_R)
    extrude(amount=BOSS_EXTRUDE6_DEPTH)

    # Sketch28 → Boss-Extrude7 (add)
    # profile 1 of 2: a face of its own
    with BuildSketch(Plane(origin=(0, 0, 3.15), x_dir=(-1, 0, 0), z_dir=(0, 0, -1))):
        with Locations((-27.5, 7)):
            Circle(SKETCH28_R)
        with Locations(Location((-27.5, 7, 0), (0, 0, 180))):
            Circle(SKETCH28_R_2, mode=Mode.SUBTRACT)
    # profile 2 of 2: a face of its own
    with BuildSketch(Plane(origin=(0, 0, 3.15), x_dir=(-1, 0, 0), z_dir=(0, 0, -1))):
        with Locations((27.5, 7)):
            Circle(SKETCH28_R)
        with Locations(Location((27.5, 7, 0), (0, 0, 180))):
            Circle(SKETCH28_R_2, mode=Mode.SUBTRACT)
    extrude(amount=-BOSS_EXTRUDE7_DEPTH)

    # Sketch29 → Boss-Extrude8 (add)
    with BuildSketch(Plane(origin=(0, 0, 3.15), x_dir=(-1, 0, 0), z_dir=(0, 0, -1))):
        with Locations((-34.625, 1)):
            Rectangle(SKETCH29_W, SKETCH29_H)
        with Locations((34.625, 1)):
            Rectangle(SKETCH29_W, SKETCH29_H)
    extrude(amount=-BOSS_EXTRUDE8_DEPTH)

    # Sketch31 → Boss-Extrude9 (add)
    with BuildSketch(Plane(origin=(0, 0, 3.15), x_dir=(-1, 0, 0), z_dir=(0, 0, -1))):
        Polygon((-22.379573543, 13.146644035), (-12, 4.5), (-19.924763055, 9.572116877), align=None)
        Polygon((19.924763055, 9.572116877), (22.379573543, 13.146644035), (12, 4.5), align=None)
    extrude(amount=-BOSS_EXTRUDE9_DEPTH)

    # Fillet1
    fillet1_edges = [part.edges().sort_by_distance(p)[0] for p in [
        (12, 4.5, 6.075),
        (-12, 4.5, 6.075),
    ]]
    fillet(fillet1_edges, radius=FILLET1_R)

    # Fillet2
    # the kernel refuses this fillet: 7 mm, written as the material it takes off along each edge
    with BuildSketch(Plane(origin=(35.5, -5, -14.35), x_dir=(0, 1, 0), z_dir=(0, 0, 1))) as fillet2_piece_1:
        with BuildLine():
            CenterArc((FILLET2_R, FILLET2_R), FILLET2_R, 180, 90)
            Line((0, FILLET2_R), (0, 0))
            Line((0, 0), (FILLET2_R, 0))
        make_face()
    extrude(amount=40.85, mode=Mode.SUBTRACT)
    with BuildSketch(Plane(origin=(-35.5, -5, -14.35), x_dir=(0, 1, 0), z_dir=(0, 0, 1))) as fillet2_piece_2:
        with BuildLine():
            CenterArc((FILLET2_R, -FILLET2_R), FILLET2_R, 90, 90)
            Line((0, -FILLET2_R), (0, 0))
            Line((0, 0), (FILLET2_R, 0))
        make_face()
    extrude(amount=40.85, mode=Mode.SUBTRACT)

    # Fillet4
    # the kernel refuses this fillet: 4 mm, written as the material it takes off along each edge
    with BuildSketch(Plane(origin=(-18.75, -1.5, 3.15), x_dir=(0.7071067811862645, -0.7071067811868306, 0), z_dir=(0, 0, -1)), Plane(origin=(-18.75, 1, -4.142135624), x_dir=(0.7071067811862647, 0.7071067811868305, 0), z_dir=(0, 0, 1)), Plane(origin=(-15.25, 4.5, -4.142135624), x_dir=(1, 0, 0), z_dir=(0, 0, 1)), Plane(origin=(-15.25, -5, 3.15), x_dir=(1, 0, 0), z_dir=(0, 0, -1)), Plane(origin=(15.25, -5, -4.142135624), x_dir=(-1, 0, 0), z_dir=(0, 0, 1)), Plane(origin=(18.75, -1.5, -4.142135624), x_dir=(-0.7071067811868305, -0.7071067811862647, 0), z_dir=(0, 0, 1))) as fillet4_piece_1:
        with BuildLine():
            CenterArc((FILLET4_R * 0.414213562373, -FILLET4_R), FILLET4_R, 90, 45)
            Line((-FILLET4_R * 0.292893218813, -FILLET4_R * 0.292893218813), (0, 0))
            Line((0, 0), (FILLET4_R * 0.414213562373, 0))
        make_face()
    extrude(amount=7.292135624, mode=Mode.SUBTRACT)
    with BuildSketch(Plane(origin=(18.75, 1, 3.15), x_dir=(0, -1, 0), z_dir=(0, 0, -1)), Plane(origin=(15.25, 4.5, 3.15), x_dir=(0.7071067811868307, -0.7071067811862646, 0), z_dir=(0, 0, -1))) as fillet4_piece_2:
        with BuildLine():
            CenterArc((FILLET4_R * 0.414213562374, FILLET4_R), FILLET4_R, 225, 45)
            Line((-FILLET4_R * 0.292893218813, FILLET4_R * 0.292893218814), (0, 0))
            Line((0, 0), (FILLET4_R * 0.414213562373, 0))
        make_face()
    extrude(amount=7.292135624, mode=Mode.SUBTRACT)


solid = part.part
